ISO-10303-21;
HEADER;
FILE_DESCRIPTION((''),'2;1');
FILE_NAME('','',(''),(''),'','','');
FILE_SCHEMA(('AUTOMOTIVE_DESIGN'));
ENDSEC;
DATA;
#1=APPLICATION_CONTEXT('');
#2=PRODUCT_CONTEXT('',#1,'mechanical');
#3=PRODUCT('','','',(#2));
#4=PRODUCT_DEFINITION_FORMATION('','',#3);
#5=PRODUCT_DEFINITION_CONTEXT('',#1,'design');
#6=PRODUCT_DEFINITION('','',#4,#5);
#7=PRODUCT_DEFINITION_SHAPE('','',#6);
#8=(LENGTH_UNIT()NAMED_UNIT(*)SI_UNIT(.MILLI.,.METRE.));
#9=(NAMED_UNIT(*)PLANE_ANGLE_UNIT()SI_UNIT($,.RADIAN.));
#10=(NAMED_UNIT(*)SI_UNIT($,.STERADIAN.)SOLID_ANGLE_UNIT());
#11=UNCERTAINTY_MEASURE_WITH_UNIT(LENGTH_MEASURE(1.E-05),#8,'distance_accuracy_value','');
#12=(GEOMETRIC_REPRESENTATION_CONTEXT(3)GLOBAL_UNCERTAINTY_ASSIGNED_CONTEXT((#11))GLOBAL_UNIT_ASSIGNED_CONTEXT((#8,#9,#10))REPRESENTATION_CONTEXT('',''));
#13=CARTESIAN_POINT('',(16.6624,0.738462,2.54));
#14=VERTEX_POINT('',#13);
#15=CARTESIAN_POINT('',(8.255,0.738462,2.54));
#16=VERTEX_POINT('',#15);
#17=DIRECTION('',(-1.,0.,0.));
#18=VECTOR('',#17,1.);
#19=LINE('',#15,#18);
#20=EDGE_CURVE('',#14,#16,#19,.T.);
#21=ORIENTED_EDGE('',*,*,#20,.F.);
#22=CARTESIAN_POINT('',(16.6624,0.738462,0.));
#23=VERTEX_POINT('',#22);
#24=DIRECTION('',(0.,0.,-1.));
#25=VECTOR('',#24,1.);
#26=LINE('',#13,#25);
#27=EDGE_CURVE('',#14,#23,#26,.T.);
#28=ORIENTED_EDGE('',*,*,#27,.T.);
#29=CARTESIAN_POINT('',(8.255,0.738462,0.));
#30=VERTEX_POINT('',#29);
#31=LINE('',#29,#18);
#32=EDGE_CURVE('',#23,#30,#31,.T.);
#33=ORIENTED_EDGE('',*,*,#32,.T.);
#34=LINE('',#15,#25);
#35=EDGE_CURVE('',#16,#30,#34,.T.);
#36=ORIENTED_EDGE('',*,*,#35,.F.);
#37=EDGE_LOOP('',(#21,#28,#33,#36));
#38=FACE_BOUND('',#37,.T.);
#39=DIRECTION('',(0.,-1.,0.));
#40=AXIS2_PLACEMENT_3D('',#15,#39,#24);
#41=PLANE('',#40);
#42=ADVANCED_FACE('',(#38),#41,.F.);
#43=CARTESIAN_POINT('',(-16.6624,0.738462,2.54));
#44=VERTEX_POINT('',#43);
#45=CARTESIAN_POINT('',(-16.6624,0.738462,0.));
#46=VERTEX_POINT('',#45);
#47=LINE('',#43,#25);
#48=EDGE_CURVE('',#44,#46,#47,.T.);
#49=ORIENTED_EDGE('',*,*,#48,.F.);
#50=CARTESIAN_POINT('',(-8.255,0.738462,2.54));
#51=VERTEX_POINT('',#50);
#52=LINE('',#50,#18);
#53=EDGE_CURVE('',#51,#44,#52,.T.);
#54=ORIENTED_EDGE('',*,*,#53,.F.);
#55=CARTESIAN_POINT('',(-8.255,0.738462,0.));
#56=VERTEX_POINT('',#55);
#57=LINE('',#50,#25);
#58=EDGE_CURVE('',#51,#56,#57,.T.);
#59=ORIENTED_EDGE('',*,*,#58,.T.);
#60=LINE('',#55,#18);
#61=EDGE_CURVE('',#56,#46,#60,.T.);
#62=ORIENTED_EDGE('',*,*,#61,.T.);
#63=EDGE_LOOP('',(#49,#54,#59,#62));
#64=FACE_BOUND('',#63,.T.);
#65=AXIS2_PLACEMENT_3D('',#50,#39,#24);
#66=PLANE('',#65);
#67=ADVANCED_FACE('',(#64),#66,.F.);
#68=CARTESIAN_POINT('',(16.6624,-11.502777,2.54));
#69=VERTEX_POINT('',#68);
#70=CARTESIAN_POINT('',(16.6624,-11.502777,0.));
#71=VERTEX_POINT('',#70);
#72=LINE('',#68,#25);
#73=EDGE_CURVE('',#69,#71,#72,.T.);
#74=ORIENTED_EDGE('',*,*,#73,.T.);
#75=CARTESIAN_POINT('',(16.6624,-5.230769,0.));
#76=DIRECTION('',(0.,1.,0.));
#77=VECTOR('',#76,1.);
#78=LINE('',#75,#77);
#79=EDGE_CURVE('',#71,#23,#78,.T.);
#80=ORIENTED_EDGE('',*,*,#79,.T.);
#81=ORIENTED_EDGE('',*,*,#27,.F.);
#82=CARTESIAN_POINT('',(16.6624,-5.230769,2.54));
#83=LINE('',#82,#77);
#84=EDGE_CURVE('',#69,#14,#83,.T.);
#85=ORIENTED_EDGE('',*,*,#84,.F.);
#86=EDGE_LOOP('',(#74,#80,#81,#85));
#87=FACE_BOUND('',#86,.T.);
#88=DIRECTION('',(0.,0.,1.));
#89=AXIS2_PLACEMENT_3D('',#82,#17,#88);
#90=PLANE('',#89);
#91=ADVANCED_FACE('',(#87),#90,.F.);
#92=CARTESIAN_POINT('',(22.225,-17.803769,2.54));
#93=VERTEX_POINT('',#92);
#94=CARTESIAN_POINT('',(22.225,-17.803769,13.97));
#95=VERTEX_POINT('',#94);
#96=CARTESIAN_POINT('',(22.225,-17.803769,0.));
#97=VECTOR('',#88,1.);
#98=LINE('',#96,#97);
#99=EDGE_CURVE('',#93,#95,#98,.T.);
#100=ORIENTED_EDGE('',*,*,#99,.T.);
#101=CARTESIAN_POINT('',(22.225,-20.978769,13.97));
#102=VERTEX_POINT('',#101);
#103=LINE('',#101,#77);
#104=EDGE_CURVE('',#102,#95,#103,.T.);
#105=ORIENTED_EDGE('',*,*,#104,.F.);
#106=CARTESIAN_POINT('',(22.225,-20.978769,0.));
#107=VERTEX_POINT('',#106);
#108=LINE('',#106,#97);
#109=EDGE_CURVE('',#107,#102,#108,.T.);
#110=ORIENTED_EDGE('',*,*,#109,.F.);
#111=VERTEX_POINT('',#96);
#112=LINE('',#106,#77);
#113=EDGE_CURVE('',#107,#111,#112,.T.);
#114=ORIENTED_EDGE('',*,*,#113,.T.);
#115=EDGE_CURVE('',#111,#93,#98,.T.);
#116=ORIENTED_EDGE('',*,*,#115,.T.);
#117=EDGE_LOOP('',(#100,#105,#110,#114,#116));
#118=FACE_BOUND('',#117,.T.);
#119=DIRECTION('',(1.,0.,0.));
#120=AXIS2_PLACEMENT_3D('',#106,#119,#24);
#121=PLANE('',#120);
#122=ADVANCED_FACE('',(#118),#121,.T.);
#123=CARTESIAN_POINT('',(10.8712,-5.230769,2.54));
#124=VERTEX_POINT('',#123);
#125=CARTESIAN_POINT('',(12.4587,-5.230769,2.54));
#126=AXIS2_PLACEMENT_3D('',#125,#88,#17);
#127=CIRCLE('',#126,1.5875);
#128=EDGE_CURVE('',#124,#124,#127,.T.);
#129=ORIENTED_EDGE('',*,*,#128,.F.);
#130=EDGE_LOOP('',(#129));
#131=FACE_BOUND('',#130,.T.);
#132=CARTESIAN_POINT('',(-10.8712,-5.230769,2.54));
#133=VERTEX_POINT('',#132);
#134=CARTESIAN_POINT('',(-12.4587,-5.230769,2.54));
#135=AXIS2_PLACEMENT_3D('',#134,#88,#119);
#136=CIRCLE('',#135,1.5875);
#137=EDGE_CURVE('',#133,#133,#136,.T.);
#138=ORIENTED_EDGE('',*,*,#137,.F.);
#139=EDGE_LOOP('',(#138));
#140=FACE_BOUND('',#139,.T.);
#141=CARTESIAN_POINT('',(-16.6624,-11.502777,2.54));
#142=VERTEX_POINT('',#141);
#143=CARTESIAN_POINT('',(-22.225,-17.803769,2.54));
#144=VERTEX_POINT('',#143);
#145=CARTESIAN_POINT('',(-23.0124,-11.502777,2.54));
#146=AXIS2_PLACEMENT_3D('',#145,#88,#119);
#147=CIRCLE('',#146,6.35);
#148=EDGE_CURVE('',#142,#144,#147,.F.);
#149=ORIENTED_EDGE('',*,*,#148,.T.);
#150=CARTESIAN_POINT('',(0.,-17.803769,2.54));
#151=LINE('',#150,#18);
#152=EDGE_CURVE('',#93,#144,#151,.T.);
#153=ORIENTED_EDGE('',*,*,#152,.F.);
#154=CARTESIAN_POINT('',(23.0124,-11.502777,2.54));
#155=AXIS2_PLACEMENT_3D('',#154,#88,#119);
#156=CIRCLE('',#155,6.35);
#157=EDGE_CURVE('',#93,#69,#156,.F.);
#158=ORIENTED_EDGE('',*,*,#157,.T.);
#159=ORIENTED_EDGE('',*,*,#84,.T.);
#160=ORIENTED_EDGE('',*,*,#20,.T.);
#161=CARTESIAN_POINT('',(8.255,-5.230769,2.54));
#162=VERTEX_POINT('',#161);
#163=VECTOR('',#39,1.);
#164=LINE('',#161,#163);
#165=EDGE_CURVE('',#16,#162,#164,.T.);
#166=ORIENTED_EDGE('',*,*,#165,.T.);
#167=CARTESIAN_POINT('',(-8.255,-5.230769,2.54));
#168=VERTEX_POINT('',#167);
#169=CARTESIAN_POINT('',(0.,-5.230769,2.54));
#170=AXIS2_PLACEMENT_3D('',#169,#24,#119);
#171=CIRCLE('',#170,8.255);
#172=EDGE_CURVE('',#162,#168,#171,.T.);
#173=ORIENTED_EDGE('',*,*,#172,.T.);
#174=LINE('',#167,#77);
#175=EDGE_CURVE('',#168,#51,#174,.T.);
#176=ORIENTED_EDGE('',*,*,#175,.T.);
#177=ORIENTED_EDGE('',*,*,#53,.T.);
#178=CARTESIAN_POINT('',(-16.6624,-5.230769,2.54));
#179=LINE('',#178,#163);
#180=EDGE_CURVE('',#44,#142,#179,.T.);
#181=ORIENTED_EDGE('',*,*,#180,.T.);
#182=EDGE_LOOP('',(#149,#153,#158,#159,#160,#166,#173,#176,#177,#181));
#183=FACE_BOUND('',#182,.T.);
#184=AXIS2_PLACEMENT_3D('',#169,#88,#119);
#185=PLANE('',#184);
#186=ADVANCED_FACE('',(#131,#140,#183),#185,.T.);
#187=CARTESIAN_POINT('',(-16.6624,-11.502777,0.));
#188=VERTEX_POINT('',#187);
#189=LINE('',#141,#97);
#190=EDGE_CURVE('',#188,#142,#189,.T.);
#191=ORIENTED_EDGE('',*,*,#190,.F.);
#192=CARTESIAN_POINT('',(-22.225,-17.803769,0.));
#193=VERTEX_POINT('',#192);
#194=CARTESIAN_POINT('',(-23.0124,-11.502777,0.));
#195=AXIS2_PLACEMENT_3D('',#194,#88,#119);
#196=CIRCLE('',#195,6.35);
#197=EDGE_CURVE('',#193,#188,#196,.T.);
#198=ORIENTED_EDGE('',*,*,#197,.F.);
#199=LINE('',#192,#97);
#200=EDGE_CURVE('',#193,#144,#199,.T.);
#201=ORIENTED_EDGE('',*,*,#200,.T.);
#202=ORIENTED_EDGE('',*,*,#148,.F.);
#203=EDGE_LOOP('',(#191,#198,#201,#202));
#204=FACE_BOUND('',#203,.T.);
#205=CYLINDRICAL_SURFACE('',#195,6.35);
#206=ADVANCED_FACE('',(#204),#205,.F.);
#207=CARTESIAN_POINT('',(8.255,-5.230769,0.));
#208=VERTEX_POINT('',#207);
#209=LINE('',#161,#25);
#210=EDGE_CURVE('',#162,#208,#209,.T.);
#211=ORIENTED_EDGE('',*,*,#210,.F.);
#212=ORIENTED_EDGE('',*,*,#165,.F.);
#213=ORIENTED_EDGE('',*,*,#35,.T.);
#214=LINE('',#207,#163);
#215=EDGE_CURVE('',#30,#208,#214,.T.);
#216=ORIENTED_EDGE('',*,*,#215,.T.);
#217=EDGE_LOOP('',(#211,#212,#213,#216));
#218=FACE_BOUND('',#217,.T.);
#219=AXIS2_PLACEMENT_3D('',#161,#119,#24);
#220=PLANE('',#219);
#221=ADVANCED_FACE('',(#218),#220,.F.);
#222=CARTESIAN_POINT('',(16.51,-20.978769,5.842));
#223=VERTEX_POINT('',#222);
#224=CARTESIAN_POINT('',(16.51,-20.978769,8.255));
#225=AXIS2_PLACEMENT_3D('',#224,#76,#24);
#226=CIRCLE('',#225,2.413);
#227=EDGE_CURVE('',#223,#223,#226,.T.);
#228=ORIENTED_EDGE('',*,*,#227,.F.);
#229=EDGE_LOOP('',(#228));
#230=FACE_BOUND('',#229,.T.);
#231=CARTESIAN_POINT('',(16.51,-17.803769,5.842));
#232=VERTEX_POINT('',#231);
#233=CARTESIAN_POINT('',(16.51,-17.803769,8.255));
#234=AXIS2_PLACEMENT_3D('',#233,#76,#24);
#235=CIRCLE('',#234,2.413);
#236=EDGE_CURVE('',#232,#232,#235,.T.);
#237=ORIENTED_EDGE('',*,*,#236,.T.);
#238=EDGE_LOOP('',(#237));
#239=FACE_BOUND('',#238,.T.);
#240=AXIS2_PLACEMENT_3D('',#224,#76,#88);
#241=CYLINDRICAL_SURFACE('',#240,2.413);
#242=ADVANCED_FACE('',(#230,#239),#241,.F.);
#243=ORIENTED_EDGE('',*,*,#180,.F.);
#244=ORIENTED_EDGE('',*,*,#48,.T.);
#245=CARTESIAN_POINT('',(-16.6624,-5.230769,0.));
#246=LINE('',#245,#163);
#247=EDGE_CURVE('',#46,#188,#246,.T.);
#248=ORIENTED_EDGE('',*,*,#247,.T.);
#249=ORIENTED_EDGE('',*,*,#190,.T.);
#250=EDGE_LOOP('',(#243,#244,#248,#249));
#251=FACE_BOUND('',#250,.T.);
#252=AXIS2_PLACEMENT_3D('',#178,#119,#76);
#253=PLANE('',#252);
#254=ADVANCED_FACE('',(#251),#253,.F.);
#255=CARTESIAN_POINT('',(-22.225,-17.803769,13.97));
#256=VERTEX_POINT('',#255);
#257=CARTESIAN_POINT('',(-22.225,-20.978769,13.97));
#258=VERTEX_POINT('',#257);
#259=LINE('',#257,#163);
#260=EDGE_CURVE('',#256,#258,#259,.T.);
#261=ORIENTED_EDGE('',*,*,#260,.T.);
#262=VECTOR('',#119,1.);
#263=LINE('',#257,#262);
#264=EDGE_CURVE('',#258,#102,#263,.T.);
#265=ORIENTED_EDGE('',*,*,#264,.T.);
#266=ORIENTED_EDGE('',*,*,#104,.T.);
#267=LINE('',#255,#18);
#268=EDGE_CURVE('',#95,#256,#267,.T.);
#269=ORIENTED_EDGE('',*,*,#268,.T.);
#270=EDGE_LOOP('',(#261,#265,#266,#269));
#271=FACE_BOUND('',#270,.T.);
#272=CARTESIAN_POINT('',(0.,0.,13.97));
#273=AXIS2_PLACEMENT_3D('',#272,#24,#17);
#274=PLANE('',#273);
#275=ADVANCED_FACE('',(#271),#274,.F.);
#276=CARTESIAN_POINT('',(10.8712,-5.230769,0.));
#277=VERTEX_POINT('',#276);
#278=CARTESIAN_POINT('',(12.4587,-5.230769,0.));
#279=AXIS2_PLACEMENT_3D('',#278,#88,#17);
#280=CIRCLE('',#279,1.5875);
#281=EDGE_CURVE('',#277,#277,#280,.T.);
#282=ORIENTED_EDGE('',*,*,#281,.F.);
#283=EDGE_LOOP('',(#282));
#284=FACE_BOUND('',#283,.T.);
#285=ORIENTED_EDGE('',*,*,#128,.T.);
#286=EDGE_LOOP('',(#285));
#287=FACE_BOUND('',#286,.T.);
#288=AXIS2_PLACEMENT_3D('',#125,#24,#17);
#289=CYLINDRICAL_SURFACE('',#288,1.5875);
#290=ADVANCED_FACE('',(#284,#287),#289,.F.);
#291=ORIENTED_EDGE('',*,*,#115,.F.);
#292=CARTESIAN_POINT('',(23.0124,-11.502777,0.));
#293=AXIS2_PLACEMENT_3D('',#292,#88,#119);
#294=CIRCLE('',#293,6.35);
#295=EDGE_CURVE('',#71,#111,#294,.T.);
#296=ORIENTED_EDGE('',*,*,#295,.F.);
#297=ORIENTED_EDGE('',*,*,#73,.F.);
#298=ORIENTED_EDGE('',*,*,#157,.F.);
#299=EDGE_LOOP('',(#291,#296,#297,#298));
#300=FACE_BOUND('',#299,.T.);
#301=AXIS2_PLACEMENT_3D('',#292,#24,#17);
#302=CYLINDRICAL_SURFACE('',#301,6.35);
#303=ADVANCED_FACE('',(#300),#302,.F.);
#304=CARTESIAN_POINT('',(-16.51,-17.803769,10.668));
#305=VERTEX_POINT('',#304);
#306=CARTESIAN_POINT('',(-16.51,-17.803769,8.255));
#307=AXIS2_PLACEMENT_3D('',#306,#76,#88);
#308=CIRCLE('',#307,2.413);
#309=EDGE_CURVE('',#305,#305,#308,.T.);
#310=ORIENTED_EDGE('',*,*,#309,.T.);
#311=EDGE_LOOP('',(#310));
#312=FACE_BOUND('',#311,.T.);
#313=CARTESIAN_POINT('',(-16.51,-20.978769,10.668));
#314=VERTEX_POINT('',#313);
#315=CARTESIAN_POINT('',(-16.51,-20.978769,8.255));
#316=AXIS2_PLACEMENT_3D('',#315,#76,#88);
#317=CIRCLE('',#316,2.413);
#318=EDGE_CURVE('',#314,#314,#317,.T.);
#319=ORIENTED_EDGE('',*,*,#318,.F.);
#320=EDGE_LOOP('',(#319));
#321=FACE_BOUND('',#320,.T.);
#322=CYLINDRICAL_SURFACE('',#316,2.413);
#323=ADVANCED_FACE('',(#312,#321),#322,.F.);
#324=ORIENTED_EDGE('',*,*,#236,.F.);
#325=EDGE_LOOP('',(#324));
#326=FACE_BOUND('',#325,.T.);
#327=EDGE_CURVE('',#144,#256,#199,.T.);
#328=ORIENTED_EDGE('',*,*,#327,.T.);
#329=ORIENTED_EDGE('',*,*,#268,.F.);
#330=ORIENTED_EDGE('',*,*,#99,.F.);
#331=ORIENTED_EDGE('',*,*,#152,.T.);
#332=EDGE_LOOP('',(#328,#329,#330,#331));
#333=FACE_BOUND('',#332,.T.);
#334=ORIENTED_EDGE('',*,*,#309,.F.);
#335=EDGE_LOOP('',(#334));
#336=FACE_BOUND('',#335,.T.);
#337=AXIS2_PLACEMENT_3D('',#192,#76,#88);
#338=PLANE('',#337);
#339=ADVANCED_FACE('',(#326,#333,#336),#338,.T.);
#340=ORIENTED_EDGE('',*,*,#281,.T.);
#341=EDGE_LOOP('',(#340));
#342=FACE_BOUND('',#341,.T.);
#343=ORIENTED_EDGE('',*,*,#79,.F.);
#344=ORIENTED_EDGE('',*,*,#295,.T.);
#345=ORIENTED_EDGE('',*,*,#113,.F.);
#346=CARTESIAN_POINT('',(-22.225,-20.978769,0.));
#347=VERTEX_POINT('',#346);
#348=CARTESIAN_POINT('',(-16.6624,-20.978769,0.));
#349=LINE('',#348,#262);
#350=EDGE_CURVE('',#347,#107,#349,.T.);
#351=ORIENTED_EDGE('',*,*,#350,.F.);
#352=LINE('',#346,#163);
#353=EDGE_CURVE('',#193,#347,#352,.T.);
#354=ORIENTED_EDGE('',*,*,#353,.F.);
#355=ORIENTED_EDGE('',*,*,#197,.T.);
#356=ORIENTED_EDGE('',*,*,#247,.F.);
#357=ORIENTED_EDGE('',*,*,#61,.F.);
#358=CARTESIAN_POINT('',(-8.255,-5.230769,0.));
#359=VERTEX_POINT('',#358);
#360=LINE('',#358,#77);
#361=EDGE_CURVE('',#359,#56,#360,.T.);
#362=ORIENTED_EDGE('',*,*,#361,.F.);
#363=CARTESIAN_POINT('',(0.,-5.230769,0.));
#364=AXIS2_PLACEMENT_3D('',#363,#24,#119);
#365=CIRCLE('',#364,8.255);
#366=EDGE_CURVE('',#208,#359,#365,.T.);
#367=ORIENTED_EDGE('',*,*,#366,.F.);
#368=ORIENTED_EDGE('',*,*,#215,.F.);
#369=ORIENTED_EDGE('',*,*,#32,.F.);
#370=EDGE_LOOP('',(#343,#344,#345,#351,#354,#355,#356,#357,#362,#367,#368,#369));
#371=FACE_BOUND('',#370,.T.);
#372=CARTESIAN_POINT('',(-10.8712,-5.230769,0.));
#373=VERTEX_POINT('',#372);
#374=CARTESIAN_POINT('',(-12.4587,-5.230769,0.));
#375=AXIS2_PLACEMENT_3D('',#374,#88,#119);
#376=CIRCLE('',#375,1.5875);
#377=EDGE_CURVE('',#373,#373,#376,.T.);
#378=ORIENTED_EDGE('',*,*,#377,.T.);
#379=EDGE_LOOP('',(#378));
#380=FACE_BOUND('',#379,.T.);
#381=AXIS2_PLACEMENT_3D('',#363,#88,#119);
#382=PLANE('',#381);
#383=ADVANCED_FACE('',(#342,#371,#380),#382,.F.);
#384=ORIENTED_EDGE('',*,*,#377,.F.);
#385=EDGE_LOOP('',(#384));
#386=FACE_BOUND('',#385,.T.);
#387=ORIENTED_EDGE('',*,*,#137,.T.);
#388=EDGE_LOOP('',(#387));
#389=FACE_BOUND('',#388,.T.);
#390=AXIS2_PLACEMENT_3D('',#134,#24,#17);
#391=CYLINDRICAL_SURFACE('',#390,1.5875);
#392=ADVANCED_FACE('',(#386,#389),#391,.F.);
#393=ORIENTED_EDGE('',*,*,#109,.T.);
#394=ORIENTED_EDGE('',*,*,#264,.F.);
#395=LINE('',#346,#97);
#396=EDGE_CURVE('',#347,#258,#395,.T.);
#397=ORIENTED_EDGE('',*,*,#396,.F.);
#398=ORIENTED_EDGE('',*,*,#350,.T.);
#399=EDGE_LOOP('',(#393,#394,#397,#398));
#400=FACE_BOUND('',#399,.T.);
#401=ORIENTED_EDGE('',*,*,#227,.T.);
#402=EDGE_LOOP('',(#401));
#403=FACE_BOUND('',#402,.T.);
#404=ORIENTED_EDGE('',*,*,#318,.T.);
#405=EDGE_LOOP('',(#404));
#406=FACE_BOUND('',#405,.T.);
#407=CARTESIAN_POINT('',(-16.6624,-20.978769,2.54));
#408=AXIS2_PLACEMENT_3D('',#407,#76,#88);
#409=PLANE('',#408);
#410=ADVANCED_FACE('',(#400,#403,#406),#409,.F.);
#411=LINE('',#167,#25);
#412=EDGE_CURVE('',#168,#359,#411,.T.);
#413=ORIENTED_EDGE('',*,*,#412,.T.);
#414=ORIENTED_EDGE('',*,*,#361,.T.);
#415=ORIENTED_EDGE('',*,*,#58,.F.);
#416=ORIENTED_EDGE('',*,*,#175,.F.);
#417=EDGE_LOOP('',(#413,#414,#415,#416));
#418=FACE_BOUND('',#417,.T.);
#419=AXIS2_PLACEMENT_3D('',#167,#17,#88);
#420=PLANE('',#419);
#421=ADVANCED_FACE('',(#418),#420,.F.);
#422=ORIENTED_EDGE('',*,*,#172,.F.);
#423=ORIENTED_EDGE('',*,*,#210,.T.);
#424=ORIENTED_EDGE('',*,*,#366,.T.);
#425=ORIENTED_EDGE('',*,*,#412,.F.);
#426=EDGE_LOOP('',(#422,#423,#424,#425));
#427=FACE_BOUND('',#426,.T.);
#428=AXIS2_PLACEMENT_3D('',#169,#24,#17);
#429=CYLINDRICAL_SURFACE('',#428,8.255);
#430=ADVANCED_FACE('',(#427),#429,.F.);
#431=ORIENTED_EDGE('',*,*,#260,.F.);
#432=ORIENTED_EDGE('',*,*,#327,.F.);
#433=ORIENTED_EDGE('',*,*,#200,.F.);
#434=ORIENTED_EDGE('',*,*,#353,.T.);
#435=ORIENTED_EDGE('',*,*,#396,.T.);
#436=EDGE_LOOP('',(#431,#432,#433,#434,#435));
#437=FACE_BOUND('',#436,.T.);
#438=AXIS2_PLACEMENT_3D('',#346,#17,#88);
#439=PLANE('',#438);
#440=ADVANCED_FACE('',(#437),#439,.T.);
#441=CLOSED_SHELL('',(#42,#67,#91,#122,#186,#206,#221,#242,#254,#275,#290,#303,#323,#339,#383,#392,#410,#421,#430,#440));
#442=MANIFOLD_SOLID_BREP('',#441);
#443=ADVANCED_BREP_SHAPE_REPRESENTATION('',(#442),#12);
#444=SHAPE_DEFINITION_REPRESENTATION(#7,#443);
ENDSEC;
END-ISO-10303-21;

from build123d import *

# Parameters (mm, degrees)
SKETCH1_R                = 1.5875
BOSS_EXTRUDE1_DEPTH      = 2.54
BOSS_EXTRUDE2_DEPTH      = 11.43
BOSS_EXTRUDE2_DEPTH_BACK = 2.54
SKETCH2_W                = 44.45
SKETCH2_H                = 3.175
SKETCH3_R                = 2.413
CUT_EXTRUDE1_DEPTH       = 33.139163755
FILLET1_R                = 6.35


with BuildPart() as part:
    # Sketch1 → Boss-Extrude1 (new body)
    with BuildSketch(Plane.XY):
        with BuildLine():
            Line((-8.255, -5.230769231), (-8.255, 0.738461538))
            Line((-8.255, 0.738461538), (-16.6624, 0.738461538))
            Line((-16.6624, 0.738461538), (-16.6624, -5.230769231))
            Line((-16.6624, -5.230769231), (-16.6624, -20.978769231))
            Line((-16.6624, -20.978769231), (16.6624, -20.978769231))
            Line((16.6624, -20.978769231), (16.6624, -5.230769231))
            Line((16.6624, -5.230769231), (16.6624, 0.738461538))
            Line((16.6624, 0.738461538), (8.255, 0.738461538))
            Line((8.255, 0.738461538), (8.255, -5.230769231))
            ThreePointArc((8.255, -5.230769231), (0, -13.485769231), (-8.255, -5.230769231))
        make_face()
        with Locations((-12.4587, -5.230769231)):
            Circle(SKETCH1_R, mode=Mode.SUBTRACT)
        with Locations(Location((12.4587, -5.230769231, 0), (0, 0, 180))):
            Circle(SKETCH1_R, mode=Mode.SUBTRACT)
    extrude(amount=BOSS_EXTRUDE1_DEPTH)

    # Sketch2 → Boss-Extrude2 (add, two sides: drawn at the far end of the back side and taken through both)
    with BuildSketch(Plane.XY.offset(2.54).offset(-BOSS_EXTRUDE2_DEPTH_BACK)):
        with Locations((0, -19.391269231)):
            Rectangle(SKETCH2_W, SKETCH2_H)
    extrude(amount=BOSS_EXTRUDE2_DEPTH + BOSS_EXTRUDE2_DEPTH_BACK)

    # Sketch3 → Cut-Extrude1 (cut, through all)
    with BuildSketch(Plane(origin=(0, -17.803769231, 0), x_dir=(1, 0, 0), z_dir=(0, 1, 0))):
        with Locations(Location((-16.51, -8.255, 0), (0, 0, 270))):
            Circle(SKETCH3_R)
        with Locations(Location((16.51, -8.255, 0), (0, 0, 90))):
            Circle(SKETCH3_R)
    extrude(amount=-CUT_EXTRUDE1_DEPTH, mode=Mode.SUBTRACT)

    # Fillet1
    # the kernel refuses this fillet: 6.35 mm, written as the material it adds along each edge
    with BuildSketch(Plane(origin=(-16.6624, -17.803769231, 2.54), x_dir=(0, 1, 0), z_dir=(0, 0, -1))) as fillet1_piece_1:
        with BuildLine():
            CenterArc((6.300992084, -6.35), FILLET1_R, 90, 82.87698928)
            Line((0, -5.5626), (-0.126019842, -5.546852))
            ThreePointArc((-0.126019842, -5.546852), (-0.127, -2.7813), (-0.127, 0))
            Line((-0.127, 0), (0, 0.127))
            Line((0, 0.127), (6.300992084, 0.127))
            Line((6.300992084, 0.127), (6.300992084, 0))
        make_face()
    extrude(amount=2.54)
    with BuildSketch(Plane(origin=(16.6624, -17.803769231, 0), x_dir=(1, 0, 0), z_dir=(0, 0, 1))) as fillet1_piece_2:
        with BuildLine():
            CenterArc((6.35, 6.300992084), FILLET1_R, 180, 82.87698928)
            Line((0, 6.300992084), (-0.127, 6.300992084))
            Line((-0.127, 6.300992084), (-0.127, 0))
            Line((-0.127, 0), (0, -0.127))
            ThreePointArc((0, -0.127), (2.7813, -0.127), (5.546852, -0.126019842))
            Line((5.546852, -0.126019842), (5.5626, 0))
        make_face()
    extrude(amount=2.54)


solid = part.part
